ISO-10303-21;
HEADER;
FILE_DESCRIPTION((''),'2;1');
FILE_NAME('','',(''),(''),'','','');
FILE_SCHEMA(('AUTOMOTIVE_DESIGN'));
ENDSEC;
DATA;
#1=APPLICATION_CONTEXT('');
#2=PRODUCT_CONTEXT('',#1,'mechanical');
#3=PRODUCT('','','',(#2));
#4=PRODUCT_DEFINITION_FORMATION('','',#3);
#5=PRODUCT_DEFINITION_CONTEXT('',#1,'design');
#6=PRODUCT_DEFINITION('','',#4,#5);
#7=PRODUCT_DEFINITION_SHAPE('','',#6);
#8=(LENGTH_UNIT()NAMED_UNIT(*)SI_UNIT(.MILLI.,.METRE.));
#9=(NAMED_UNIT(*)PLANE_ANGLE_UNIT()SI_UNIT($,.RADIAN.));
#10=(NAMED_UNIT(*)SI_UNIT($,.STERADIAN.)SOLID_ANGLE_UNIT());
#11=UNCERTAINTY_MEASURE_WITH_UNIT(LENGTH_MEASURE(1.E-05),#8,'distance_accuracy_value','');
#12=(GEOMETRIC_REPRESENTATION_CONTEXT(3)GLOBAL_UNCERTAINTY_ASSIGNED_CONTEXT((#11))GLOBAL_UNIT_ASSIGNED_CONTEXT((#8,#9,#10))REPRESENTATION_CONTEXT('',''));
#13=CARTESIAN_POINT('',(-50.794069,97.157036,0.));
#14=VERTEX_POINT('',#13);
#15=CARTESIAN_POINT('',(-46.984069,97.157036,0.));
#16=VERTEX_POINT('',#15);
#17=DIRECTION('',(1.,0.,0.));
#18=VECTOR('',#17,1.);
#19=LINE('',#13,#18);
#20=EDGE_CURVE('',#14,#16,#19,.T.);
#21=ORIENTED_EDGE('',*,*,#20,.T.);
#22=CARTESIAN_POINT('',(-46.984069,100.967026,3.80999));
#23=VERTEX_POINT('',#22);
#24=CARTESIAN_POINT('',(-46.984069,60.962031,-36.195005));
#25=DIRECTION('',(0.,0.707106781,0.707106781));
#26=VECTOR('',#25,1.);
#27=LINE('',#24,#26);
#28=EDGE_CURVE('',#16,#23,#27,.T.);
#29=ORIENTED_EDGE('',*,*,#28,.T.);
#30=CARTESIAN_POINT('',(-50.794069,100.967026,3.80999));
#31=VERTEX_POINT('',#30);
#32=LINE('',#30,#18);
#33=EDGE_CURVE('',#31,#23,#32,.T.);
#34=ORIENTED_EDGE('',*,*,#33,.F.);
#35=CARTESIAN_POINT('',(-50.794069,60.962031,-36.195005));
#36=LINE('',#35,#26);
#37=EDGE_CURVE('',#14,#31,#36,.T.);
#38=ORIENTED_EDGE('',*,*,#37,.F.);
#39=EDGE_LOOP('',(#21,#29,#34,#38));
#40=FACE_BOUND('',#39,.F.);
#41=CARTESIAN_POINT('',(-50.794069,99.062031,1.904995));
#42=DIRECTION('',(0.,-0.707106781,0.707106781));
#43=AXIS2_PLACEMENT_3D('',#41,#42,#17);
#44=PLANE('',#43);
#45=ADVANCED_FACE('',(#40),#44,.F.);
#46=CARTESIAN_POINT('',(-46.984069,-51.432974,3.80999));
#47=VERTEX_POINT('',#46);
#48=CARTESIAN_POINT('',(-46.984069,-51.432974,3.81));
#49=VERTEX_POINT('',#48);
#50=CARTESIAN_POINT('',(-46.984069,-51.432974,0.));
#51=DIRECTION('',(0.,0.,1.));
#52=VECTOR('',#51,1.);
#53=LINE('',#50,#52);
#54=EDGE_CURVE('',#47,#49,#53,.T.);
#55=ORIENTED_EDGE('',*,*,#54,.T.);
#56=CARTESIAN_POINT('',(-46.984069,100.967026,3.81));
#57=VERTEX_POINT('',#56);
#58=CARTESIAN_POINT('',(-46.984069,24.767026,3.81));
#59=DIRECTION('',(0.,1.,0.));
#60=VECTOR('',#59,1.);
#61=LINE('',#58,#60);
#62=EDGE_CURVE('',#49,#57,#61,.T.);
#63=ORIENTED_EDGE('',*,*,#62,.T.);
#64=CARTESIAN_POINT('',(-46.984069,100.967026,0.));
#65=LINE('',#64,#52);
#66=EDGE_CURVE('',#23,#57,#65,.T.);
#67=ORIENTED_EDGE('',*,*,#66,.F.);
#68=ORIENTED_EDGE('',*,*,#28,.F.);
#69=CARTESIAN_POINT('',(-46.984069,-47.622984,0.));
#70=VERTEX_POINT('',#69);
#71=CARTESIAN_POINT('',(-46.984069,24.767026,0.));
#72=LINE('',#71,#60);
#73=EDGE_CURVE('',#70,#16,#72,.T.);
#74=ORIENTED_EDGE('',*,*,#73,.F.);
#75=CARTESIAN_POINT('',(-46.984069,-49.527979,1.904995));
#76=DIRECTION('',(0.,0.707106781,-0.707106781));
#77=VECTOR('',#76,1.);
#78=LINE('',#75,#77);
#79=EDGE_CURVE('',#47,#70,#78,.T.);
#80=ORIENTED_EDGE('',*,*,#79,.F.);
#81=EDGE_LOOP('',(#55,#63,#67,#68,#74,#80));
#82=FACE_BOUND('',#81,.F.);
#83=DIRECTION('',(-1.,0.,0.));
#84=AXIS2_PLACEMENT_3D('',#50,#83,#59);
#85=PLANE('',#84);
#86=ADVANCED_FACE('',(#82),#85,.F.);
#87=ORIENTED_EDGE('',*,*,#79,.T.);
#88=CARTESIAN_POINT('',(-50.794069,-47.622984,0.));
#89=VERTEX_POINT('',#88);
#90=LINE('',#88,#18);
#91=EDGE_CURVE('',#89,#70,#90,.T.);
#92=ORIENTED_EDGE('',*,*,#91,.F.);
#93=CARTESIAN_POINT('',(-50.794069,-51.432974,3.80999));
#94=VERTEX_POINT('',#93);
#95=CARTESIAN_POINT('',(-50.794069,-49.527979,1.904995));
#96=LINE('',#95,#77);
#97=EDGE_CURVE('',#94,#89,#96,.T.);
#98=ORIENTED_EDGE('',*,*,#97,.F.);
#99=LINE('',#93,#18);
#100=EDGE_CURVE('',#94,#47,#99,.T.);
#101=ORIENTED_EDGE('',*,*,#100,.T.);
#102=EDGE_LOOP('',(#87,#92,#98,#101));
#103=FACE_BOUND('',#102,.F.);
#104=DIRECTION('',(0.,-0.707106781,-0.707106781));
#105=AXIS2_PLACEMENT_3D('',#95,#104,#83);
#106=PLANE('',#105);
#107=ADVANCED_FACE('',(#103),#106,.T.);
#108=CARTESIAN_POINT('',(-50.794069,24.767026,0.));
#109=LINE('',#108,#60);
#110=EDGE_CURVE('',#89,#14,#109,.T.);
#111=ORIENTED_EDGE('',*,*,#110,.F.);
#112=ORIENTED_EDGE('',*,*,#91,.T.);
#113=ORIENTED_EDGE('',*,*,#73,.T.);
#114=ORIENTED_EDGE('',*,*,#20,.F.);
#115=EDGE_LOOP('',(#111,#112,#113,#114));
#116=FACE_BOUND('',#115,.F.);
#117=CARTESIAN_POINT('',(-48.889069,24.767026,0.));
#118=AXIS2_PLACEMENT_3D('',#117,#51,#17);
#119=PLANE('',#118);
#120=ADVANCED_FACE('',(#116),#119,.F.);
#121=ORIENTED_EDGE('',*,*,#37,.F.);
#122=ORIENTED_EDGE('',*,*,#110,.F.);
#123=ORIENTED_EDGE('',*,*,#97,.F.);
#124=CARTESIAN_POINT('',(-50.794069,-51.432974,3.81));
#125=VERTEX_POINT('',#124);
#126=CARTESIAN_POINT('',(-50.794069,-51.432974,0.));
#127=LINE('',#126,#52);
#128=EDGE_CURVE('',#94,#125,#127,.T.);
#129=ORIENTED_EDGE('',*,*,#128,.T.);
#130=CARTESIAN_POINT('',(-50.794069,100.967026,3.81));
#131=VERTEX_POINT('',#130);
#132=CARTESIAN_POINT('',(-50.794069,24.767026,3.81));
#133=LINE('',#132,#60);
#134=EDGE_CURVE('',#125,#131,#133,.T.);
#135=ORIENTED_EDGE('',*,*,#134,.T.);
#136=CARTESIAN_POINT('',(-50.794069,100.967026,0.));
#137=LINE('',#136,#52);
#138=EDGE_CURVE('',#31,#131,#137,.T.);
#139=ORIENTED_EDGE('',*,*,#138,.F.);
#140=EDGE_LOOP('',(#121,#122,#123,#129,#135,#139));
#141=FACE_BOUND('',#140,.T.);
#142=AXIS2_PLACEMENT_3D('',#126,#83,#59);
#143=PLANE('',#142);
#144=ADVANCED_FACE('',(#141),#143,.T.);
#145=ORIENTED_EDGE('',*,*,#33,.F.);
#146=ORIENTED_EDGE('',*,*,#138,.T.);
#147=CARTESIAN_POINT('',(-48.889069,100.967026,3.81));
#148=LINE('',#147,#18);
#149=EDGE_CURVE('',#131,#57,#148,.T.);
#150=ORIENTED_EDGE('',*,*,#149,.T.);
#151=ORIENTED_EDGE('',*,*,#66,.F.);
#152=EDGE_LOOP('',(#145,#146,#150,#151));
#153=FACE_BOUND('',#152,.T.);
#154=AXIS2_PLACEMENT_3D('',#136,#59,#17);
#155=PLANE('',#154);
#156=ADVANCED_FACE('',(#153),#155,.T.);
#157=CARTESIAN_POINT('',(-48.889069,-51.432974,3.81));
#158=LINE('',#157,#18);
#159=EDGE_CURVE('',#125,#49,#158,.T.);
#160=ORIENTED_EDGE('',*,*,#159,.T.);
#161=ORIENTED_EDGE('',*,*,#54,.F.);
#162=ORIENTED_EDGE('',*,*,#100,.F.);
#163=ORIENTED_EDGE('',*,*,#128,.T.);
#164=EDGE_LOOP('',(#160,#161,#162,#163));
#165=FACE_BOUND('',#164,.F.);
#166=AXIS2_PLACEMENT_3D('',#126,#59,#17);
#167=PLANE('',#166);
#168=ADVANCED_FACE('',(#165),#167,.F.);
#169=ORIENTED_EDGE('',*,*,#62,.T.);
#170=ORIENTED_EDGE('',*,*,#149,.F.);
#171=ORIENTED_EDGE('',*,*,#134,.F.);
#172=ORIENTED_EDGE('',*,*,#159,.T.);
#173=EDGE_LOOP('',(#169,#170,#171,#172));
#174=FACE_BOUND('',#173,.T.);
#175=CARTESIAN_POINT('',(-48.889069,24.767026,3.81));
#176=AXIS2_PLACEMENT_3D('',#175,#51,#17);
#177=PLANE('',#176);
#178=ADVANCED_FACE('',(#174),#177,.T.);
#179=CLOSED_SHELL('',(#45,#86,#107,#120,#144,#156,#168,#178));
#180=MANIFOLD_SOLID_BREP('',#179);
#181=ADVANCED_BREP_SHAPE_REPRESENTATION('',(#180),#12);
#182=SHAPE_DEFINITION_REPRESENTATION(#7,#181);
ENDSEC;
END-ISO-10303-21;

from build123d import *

# Parameters (mm, degrees)
F0_W     = 3.81
F0_H     = 152.4
F1_DEPTH = 3.81
F2_SIZE  = 3.80999
F3_SIZE  = 3.80999


# Not quite as in the source:
# - a fillet or chamfer is up to 0.001 mm smaller than in the source, because OpenCascade refuses the exact size


with BuildPart() as f1:
    # F0 (on Top) → F1 (new body)
    with BuildSketch(Plane.XY):
        with Locations((-48.8890688866, 24.7670258315)):
            Rectangle(F0_W, F0_H)
    extrude(amount=F1_DEPTH)

    # F2 (size 3.81 in the source; OpenCascade refuses exactly that, so slightly less here)
    f2_edges = [f1.edges().sort_by_distance(p)[0] for p in [
        (-48.889069, -51.432974, 0),
    ]]
    chamfer(f2_edges, length=F2_SIZE)

    # F3 (size 3.81 in the source; OpenCascade refuses exactly that, so slightly less here)
    f3_edges = [f1.edges().sort_by_distance(p)[0] for p in [
        (-48.889069, 100.967026, 0),
    ]]
    chamfer(f3_edges, length=F3_SIZE)


solid = f1.part
